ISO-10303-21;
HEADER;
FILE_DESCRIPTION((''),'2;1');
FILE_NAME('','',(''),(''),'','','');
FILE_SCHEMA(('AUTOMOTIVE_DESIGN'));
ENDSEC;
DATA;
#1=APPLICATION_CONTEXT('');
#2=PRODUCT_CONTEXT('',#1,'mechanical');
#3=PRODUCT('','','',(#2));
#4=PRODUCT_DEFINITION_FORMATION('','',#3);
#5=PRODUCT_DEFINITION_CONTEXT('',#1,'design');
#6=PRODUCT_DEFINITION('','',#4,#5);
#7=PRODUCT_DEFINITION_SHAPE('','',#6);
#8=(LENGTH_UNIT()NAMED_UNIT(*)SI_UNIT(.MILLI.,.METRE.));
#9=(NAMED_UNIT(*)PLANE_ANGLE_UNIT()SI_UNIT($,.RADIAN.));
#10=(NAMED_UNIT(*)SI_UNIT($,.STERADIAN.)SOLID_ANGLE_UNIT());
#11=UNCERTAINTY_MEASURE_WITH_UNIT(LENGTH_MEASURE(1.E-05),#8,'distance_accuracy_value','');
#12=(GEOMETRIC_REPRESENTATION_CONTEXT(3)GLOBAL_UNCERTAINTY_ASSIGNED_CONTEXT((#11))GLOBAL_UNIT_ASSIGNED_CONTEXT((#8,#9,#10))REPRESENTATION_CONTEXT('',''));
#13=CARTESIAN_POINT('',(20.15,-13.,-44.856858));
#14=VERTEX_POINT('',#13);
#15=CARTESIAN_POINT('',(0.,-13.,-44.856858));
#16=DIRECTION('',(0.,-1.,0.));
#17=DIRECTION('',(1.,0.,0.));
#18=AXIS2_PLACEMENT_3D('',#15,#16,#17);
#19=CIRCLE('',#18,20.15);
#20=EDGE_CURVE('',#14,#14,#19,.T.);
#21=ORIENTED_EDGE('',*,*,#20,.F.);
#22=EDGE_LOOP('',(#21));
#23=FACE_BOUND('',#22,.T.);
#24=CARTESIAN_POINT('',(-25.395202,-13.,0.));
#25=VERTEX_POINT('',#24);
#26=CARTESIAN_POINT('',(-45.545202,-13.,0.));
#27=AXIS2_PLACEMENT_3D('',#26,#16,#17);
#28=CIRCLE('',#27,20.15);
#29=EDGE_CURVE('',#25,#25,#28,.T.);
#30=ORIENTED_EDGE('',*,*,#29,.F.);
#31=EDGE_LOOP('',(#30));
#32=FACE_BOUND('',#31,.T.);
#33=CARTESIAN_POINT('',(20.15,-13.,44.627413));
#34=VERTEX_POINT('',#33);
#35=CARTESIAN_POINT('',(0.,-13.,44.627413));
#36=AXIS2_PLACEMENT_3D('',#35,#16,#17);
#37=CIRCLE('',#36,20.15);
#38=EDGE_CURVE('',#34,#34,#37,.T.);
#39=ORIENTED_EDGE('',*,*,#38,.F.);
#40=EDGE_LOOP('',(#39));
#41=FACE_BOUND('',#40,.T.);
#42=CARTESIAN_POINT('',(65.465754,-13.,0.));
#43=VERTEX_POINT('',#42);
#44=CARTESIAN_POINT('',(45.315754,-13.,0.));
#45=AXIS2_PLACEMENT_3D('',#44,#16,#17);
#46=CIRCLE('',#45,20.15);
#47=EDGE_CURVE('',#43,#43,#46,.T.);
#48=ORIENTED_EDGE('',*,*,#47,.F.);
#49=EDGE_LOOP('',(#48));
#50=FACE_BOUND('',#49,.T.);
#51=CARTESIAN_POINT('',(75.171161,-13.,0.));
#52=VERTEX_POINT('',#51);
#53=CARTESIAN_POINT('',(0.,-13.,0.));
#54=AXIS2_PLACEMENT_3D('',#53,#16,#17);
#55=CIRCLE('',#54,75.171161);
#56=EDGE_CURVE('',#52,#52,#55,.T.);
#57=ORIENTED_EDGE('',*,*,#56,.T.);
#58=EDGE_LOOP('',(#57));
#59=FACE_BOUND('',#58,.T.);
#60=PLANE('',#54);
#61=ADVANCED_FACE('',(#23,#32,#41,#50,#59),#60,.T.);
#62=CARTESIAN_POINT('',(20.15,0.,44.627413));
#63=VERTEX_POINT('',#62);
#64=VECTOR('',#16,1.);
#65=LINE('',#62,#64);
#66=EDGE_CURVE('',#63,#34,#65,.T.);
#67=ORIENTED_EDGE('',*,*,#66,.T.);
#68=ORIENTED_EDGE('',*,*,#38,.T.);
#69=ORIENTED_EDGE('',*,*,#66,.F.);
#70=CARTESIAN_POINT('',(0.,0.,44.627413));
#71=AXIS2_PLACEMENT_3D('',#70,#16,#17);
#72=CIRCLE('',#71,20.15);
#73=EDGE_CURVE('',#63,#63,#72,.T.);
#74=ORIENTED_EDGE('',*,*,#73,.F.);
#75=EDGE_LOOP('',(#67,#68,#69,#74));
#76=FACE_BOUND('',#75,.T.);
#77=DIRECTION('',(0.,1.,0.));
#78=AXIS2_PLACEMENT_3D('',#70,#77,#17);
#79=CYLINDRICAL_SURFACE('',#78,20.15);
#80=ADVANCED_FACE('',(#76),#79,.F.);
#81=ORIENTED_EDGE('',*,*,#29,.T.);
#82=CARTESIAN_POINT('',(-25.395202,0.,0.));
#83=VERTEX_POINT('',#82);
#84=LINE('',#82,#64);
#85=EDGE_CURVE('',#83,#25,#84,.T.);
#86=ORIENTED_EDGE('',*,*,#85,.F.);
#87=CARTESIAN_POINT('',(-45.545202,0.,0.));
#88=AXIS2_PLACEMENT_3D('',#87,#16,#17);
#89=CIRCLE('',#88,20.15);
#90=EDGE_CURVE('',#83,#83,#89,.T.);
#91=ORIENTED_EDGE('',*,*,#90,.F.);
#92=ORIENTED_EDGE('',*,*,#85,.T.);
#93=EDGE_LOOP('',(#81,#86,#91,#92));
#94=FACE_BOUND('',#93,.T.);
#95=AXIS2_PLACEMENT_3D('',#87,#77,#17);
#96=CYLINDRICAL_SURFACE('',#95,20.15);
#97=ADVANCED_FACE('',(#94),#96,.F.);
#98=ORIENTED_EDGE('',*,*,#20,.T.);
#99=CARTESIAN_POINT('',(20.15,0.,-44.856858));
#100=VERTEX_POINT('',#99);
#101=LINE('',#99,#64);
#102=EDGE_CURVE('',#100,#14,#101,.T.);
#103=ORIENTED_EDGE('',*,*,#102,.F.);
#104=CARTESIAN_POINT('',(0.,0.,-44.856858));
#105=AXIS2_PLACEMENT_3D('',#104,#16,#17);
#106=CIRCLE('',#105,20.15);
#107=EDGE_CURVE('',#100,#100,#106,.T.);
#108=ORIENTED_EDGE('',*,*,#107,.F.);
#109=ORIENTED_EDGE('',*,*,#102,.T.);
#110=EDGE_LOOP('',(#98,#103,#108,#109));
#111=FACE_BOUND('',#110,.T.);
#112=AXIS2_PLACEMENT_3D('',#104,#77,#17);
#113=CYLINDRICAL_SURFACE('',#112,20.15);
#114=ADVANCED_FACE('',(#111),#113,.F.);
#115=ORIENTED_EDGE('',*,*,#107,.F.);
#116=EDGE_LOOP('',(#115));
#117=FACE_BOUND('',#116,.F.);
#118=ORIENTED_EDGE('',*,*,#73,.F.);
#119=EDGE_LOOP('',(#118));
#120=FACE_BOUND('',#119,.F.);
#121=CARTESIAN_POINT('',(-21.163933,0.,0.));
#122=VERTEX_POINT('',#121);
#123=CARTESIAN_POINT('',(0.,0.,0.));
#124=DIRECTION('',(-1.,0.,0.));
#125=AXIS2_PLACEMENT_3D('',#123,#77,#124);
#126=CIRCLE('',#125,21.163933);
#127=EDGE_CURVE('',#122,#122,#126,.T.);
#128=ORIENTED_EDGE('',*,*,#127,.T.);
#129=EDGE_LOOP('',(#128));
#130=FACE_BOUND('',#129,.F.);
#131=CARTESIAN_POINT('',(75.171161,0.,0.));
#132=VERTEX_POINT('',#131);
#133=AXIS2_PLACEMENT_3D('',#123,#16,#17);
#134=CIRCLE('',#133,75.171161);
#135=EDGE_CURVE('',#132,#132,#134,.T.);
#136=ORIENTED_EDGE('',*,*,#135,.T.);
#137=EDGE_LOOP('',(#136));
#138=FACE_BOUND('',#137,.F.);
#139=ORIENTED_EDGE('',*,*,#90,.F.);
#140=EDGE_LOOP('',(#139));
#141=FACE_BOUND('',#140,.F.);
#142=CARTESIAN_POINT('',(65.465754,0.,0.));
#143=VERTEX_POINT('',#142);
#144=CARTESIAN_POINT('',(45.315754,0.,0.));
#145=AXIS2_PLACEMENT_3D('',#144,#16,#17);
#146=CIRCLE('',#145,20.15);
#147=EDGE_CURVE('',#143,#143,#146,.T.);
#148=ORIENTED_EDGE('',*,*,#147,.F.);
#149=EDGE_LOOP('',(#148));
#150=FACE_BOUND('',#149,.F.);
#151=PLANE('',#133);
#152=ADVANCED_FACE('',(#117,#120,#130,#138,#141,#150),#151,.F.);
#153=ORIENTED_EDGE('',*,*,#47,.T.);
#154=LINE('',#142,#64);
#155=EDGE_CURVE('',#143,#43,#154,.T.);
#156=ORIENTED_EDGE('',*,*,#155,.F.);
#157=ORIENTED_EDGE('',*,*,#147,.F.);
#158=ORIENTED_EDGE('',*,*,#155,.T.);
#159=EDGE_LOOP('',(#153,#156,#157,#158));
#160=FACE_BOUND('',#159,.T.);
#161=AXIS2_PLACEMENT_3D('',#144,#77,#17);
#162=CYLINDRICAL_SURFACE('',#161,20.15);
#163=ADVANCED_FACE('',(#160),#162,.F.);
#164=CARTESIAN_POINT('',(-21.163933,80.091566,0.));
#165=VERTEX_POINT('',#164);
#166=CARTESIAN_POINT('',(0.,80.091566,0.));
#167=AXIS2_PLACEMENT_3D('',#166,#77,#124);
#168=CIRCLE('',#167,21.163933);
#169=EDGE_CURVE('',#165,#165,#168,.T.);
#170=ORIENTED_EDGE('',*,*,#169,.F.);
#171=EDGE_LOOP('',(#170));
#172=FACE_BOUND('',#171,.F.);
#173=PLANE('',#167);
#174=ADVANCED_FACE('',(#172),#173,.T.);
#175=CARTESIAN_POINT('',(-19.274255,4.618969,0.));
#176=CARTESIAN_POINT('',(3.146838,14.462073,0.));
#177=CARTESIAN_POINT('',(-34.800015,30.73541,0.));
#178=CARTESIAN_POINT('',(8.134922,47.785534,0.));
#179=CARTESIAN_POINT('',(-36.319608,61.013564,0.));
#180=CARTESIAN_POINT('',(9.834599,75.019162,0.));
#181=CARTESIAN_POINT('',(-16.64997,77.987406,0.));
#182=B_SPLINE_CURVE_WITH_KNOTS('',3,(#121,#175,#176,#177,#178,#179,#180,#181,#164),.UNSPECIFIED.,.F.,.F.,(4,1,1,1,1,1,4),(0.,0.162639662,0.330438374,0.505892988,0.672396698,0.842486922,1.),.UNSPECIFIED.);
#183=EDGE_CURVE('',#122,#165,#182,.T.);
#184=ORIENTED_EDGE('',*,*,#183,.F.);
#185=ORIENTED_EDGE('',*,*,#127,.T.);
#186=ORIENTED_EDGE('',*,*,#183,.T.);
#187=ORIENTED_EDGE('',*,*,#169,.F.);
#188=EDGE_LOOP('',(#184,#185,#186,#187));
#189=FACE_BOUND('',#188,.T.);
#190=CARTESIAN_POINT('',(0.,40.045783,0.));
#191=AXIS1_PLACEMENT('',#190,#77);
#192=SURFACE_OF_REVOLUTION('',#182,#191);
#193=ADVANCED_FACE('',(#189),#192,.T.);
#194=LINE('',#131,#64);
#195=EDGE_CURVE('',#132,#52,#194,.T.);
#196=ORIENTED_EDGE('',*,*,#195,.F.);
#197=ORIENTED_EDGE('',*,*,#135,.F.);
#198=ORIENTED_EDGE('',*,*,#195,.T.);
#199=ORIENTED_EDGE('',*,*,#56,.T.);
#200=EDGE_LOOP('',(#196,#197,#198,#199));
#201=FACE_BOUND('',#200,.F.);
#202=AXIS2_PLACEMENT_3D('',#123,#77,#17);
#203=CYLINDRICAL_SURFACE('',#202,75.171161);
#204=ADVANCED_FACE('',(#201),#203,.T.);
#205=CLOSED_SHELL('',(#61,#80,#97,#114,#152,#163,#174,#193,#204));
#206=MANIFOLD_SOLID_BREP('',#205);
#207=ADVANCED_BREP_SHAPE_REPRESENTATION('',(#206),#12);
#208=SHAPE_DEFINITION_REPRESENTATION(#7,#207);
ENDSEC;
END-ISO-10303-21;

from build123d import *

# Parameters (mm, degrees)
F0_R     = 75.1711608748
F0_R_2   = 20.15
F1_DEPTH = 13


# Not quite as in the source:
# - a feature names something its author has since deleted; it is built from what else it names
# - the program builds the solid bodies; features that only make, move or delete a surface that nothing else refers to are left out


with BuildPart() as f1:
    # F0 (on Front) → F1 (new body)
    with BuildSketch(Plane.XZ):
        Circle(F0_R)
        with Locations((0, -44.8568575084)):
            Circle(F0_R_2, mode=Mode.SUBTRACT)
        with Locations((-45.5452017486, 0)):
            Circle(F0_R_2, mode=Mode.SUBTRACT)
        with Locations((45.3157536685, 0)):
            Circle(F0_R_2, mode=Mode.SUBTRACT)
        with Locations((0, 44.6274131536)):
            Circle(F0_R_2, mode=Mode.SUBTRACT)
    extrude(amount=F1_DEPTH)

    # F2 (on Top) → F3 (revolve)
    with BuildSketch(Plane.XY):
        with BuildLine():
            Line((-21.1639329791, 0), (0, 0))
            Line((0, 0), (0, 80.0915658474))
            Line((0, 80.0915658474), (-21.1639329791, 80.0915658474))
            add(Edge.make_bspline(
                [(-21.1639329791, 0), (-19.2742553322, 4.6189694115), (3.1468380819, 14.4620732239), (-34.8000145769, 30.7354101763), (8.134922476, 47.7855342492), (-36.319607523, 61.0135638885), (9.834598536, 75.0191615104), (-16.6499702233, 77.9874063736), (-21.1639329791, 80.0915658474)],
                knots=[0, 0, 0, 0, 0.1626396624, 0.3304383742, 0.5058929878, 0.6723966985, 0.8424869218, 1, 1, 1, 1], degree=3))
        make_face()
    revolve(axis=Axis((0, 40.0457829237, 0), (0, 1, 0)))


solid = f1.part
